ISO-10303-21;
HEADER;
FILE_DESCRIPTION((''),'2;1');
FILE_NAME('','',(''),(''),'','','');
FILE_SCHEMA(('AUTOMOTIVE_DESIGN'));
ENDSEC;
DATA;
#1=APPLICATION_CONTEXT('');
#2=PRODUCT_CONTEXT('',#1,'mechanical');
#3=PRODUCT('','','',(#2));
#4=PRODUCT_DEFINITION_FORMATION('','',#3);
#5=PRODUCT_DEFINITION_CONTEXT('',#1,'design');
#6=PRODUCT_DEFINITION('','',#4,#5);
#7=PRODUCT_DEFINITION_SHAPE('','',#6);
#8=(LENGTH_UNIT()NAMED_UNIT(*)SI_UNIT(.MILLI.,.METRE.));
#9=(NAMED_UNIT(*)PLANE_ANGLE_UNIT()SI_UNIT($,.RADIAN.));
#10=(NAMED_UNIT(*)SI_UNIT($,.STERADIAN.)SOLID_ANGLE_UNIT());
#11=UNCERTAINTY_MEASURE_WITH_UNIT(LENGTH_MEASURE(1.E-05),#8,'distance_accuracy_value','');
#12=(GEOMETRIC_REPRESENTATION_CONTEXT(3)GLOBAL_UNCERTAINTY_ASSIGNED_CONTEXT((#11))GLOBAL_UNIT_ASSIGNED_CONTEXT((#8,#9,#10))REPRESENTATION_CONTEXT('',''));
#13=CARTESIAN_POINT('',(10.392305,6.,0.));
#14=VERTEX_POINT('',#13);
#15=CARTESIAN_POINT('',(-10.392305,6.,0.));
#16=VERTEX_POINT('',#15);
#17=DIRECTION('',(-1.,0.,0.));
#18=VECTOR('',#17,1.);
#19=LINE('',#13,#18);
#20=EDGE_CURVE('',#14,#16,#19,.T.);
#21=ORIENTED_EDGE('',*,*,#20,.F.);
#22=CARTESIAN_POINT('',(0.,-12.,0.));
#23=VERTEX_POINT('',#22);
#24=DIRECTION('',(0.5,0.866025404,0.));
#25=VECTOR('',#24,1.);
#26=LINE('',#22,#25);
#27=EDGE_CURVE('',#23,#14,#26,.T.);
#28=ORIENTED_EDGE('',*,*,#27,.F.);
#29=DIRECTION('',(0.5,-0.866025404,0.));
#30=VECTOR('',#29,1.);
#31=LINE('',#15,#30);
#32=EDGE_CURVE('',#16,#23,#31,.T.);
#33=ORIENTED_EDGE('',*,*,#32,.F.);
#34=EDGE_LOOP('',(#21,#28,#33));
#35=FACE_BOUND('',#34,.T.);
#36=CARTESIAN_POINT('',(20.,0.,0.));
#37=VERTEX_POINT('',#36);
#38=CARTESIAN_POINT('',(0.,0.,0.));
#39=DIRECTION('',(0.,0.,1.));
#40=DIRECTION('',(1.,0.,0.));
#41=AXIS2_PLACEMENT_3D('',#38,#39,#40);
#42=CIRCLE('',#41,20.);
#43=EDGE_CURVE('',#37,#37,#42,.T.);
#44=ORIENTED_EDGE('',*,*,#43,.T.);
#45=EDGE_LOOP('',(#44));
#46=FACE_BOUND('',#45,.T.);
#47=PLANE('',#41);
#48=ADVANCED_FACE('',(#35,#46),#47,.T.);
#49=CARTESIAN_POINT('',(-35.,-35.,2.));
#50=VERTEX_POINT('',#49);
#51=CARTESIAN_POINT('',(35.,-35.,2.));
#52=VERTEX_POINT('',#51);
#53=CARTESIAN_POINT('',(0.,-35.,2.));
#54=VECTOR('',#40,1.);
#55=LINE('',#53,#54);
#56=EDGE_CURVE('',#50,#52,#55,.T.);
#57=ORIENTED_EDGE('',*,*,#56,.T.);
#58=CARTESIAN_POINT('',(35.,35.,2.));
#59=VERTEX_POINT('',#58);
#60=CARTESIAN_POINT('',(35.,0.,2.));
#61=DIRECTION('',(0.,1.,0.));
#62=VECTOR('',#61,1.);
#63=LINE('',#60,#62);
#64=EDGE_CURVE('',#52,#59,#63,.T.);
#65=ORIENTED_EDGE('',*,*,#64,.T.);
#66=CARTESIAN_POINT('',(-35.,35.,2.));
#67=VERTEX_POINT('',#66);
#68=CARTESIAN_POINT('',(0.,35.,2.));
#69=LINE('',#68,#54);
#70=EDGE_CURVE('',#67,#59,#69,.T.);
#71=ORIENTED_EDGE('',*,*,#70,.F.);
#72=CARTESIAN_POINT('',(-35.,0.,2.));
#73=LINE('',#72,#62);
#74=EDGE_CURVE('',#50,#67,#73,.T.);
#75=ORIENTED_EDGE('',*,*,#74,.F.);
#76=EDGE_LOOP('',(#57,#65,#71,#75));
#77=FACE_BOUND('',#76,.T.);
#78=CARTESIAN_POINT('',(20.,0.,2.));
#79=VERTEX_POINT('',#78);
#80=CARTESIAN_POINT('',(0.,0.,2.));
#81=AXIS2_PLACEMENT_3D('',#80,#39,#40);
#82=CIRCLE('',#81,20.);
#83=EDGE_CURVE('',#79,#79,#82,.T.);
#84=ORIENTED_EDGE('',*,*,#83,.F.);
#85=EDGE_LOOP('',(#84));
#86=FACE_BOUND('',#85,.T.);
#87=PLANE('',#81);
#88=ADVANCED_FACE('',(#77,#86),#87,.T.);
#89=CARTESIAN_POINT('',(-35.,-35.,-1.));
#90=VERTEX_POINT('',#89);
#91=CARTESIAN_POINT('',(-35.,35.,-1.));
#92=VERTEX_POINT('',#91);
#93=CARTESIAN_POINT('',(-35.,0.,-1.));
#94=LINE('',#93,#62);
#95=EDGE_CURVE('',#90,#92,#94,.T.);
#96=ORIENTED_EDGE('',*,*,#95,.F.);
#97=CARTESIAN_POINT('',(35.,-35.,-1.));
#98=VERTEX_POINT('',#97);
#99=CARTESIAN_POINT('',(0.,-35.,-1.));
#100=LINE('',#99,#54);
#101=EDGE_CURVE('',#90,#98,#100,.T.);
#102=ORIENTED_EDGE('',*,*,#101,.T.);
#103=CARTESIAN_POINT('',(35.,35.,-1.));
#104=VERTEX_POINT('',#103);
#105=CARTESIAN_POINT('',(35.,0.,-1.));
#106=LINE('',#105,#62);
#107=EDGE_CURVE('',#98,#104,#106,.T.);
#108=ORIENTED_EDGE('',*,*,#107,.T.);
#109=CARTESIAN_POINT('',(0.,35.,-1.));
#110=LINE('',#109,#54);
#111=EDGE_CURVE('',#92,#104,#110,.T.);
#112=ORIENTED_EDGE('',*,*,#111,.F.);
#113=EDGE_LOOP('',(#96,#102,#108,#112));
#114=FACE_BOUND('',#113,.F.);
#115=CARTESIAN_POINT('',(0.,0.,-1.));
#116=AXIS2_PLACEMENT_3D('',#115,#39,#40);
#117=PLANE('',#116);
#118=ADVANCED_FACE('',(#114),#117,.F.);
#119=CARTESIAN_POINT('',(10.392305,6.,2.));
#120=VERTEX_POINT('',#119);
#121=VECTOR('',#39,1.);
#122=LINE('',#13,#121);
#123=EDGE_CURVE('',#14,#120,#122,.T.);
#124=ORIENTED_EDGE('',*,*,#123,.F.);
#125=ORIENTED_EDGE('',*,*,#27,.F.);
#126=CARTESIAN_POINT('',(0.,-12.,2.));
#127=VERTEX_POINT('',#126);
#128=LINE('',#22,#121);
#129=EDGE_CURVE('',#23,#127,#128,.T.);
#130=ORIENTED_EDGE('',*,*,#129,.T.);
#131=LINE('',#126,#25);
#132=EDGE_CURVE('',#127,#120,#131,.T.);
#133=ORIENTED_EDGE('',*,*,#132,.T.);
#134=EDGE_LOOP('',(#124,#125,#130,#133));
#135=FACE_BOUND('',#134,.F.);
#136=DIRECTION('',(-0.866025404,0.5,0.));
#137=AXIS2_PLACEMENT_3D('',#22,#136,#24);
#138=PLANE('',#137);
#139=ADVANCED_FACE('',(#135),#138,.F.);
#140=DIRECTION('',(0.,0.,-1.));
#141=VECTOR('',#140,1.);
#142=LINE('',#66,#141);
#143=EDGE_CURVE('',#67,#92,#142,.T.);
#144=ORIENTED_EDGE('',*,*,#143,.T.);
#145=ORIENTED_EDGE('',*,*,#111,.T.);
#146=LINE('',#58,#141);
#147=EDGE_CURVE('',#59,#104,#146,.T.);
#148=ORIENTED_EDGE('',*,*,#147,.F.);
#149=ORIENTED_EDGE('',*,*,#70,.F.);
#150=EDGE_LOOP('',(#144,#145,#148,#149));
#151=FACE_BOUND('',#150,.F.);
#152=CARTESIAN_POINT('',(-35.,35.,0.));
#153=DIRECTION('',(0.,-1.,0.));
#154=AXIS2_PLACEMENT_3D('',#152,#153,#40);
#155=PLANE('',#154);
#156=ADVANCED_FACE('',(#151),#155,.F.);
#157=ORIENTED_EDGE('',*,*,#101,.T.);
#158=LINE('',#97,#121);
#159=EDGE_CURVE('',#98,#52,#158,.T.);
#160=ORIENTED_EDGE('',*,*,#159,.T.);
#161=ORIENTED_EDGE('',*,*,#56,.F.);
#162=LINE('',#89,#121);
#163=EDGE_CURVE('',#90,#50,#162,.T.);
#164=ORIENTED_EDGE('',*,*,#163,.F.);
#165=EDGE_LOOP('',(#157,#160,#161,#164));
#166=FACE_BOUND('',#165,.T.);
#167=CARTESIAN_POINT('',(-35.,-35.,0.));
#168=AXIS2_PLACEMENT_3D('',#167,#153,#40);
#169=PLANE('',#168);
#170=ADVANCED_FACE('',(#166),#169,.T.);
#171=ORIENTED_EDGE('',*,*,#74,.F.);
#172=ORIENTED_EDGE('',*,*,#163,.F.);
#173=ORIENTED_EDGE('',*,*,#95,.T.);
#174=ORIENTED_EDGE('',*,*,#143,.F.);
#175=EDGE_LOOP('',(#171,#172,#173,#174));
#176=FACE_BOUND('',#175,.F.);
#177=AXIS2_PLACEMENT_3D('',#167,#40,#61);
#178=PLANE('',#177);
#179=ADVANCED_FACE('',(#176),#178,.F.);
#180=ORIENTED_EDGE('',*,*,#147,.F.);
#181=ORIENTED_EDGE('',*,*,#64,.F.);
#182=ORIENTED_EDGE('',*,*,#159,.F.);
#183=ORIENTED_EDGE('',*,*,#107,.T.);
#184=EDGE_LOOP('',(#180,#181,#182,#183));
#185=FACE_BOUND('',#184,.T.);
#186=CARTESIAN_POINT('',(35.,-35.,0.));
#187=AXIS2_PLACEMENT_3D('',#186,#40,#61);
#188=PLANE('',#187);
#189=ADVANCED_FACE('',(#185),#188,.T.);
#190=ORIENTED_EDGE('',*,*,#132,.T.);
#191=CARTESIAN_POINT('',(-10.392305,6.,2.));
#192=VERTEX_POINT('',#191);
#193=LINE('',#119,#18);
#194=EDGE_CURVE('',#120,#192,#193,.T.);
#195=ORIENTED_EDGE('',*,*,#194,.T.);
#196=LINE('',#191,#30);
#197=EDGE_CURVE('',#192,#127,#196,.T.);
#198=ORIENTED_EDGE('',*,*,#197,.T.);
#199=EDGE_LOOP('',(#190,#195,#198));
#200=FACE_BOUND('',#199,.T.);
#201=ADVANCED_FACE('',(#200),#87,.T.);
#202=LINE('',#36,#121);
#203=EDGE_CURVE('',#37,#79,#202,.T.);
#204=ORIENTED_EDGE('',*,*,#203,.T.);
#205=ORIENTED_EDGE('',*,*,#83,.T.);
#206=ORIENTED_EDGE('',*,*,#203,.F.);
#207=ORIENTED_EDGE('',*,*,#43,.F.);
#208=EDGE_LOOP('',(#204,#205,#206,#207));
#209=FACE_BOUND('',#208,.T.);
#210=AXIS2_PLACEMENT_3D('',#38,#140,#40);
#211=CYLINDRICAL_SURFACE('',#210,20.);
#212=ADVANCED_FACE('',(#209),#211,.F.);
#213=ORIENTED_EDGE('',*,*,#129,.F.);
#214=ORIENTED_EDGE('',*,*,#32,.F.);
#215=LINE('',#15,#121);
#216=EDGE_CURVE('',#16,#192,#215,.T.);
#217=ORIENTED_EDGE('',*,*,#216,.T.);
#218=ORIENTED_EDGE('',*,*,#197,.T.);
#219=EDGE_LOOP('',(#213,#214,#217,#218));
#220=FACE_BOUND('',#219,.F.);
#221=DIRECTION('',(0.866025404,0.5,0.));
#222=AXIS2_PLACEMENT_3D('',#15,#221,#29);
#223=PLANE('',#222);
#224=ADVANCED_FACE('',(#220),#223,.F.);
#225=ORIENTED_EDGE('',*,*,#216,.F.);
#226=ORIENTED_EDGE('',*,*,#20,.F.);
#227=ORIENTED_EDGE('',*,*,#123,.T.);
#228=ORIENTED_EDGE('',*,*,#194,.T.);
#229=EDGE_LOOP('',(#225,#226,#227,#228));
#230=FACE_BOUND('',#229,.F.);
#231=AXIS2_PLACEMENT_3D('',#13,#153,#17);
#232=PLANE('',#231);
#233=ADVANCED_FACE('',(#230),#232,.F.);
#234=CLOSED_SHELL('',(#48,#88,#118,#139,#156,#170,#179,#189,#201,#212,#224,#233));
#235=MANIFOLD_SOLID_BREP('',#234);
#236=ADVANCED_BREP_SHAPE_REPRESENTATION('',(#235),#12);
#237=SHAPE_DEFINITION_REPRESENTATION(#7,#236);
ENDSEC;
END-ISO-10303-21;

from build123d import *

# Parameters (mm, degrees)
F0_W     = 70
F0_H     = 70
F0_R     = 20
F1_DEPTH = 2
F2_DEPTH = 1


# Not quite as in the source:
# - a feature names something its author has since deleted; it is built from what else it names


with BuildPart() as f1:
    # F0 (on Top) → F1 (new body)
    with BuildSketch(Plane.XY):
        Rectangle(F0_W, F0_H)
        Circle(F0_R, mode=Mode.SUBTRACT)
    extrude(amount=F1_DEPTH)



with BuildPart() as f1b:
    # F0 (on Top) → F1, piece 2 (new body)
    with BuildSketch(Plane.XY):
        Polygon((10.3923048454, 6), (-10.3923048454, 6), (0, -12), align=None)
    extrude(amount=F1_DEPTH)


with BuildPart() as f1_1:
    add(f1.part)

    add(f1b.part)  # F2 merges F1b
    # F0 (on Top) → F2 (join)
    with BuildSketch(Plane.XY):
        Rectangle(F0_W, F0_H)
        Circle(F0_R, mode=Mode.SUBTRACT)
        Circle(F0_R)
        Polygon((0, -12), (-10.3923048454, 6), (10.3923048454, 6), align=None, mode=Mode.SUBTRACT)
        Polygon((10.3923048454, 6), (-10.3923048454, 6), (0, -12), align=None)
    extrude(amount=-F2_DEPTH)


solid = f1_1.part
